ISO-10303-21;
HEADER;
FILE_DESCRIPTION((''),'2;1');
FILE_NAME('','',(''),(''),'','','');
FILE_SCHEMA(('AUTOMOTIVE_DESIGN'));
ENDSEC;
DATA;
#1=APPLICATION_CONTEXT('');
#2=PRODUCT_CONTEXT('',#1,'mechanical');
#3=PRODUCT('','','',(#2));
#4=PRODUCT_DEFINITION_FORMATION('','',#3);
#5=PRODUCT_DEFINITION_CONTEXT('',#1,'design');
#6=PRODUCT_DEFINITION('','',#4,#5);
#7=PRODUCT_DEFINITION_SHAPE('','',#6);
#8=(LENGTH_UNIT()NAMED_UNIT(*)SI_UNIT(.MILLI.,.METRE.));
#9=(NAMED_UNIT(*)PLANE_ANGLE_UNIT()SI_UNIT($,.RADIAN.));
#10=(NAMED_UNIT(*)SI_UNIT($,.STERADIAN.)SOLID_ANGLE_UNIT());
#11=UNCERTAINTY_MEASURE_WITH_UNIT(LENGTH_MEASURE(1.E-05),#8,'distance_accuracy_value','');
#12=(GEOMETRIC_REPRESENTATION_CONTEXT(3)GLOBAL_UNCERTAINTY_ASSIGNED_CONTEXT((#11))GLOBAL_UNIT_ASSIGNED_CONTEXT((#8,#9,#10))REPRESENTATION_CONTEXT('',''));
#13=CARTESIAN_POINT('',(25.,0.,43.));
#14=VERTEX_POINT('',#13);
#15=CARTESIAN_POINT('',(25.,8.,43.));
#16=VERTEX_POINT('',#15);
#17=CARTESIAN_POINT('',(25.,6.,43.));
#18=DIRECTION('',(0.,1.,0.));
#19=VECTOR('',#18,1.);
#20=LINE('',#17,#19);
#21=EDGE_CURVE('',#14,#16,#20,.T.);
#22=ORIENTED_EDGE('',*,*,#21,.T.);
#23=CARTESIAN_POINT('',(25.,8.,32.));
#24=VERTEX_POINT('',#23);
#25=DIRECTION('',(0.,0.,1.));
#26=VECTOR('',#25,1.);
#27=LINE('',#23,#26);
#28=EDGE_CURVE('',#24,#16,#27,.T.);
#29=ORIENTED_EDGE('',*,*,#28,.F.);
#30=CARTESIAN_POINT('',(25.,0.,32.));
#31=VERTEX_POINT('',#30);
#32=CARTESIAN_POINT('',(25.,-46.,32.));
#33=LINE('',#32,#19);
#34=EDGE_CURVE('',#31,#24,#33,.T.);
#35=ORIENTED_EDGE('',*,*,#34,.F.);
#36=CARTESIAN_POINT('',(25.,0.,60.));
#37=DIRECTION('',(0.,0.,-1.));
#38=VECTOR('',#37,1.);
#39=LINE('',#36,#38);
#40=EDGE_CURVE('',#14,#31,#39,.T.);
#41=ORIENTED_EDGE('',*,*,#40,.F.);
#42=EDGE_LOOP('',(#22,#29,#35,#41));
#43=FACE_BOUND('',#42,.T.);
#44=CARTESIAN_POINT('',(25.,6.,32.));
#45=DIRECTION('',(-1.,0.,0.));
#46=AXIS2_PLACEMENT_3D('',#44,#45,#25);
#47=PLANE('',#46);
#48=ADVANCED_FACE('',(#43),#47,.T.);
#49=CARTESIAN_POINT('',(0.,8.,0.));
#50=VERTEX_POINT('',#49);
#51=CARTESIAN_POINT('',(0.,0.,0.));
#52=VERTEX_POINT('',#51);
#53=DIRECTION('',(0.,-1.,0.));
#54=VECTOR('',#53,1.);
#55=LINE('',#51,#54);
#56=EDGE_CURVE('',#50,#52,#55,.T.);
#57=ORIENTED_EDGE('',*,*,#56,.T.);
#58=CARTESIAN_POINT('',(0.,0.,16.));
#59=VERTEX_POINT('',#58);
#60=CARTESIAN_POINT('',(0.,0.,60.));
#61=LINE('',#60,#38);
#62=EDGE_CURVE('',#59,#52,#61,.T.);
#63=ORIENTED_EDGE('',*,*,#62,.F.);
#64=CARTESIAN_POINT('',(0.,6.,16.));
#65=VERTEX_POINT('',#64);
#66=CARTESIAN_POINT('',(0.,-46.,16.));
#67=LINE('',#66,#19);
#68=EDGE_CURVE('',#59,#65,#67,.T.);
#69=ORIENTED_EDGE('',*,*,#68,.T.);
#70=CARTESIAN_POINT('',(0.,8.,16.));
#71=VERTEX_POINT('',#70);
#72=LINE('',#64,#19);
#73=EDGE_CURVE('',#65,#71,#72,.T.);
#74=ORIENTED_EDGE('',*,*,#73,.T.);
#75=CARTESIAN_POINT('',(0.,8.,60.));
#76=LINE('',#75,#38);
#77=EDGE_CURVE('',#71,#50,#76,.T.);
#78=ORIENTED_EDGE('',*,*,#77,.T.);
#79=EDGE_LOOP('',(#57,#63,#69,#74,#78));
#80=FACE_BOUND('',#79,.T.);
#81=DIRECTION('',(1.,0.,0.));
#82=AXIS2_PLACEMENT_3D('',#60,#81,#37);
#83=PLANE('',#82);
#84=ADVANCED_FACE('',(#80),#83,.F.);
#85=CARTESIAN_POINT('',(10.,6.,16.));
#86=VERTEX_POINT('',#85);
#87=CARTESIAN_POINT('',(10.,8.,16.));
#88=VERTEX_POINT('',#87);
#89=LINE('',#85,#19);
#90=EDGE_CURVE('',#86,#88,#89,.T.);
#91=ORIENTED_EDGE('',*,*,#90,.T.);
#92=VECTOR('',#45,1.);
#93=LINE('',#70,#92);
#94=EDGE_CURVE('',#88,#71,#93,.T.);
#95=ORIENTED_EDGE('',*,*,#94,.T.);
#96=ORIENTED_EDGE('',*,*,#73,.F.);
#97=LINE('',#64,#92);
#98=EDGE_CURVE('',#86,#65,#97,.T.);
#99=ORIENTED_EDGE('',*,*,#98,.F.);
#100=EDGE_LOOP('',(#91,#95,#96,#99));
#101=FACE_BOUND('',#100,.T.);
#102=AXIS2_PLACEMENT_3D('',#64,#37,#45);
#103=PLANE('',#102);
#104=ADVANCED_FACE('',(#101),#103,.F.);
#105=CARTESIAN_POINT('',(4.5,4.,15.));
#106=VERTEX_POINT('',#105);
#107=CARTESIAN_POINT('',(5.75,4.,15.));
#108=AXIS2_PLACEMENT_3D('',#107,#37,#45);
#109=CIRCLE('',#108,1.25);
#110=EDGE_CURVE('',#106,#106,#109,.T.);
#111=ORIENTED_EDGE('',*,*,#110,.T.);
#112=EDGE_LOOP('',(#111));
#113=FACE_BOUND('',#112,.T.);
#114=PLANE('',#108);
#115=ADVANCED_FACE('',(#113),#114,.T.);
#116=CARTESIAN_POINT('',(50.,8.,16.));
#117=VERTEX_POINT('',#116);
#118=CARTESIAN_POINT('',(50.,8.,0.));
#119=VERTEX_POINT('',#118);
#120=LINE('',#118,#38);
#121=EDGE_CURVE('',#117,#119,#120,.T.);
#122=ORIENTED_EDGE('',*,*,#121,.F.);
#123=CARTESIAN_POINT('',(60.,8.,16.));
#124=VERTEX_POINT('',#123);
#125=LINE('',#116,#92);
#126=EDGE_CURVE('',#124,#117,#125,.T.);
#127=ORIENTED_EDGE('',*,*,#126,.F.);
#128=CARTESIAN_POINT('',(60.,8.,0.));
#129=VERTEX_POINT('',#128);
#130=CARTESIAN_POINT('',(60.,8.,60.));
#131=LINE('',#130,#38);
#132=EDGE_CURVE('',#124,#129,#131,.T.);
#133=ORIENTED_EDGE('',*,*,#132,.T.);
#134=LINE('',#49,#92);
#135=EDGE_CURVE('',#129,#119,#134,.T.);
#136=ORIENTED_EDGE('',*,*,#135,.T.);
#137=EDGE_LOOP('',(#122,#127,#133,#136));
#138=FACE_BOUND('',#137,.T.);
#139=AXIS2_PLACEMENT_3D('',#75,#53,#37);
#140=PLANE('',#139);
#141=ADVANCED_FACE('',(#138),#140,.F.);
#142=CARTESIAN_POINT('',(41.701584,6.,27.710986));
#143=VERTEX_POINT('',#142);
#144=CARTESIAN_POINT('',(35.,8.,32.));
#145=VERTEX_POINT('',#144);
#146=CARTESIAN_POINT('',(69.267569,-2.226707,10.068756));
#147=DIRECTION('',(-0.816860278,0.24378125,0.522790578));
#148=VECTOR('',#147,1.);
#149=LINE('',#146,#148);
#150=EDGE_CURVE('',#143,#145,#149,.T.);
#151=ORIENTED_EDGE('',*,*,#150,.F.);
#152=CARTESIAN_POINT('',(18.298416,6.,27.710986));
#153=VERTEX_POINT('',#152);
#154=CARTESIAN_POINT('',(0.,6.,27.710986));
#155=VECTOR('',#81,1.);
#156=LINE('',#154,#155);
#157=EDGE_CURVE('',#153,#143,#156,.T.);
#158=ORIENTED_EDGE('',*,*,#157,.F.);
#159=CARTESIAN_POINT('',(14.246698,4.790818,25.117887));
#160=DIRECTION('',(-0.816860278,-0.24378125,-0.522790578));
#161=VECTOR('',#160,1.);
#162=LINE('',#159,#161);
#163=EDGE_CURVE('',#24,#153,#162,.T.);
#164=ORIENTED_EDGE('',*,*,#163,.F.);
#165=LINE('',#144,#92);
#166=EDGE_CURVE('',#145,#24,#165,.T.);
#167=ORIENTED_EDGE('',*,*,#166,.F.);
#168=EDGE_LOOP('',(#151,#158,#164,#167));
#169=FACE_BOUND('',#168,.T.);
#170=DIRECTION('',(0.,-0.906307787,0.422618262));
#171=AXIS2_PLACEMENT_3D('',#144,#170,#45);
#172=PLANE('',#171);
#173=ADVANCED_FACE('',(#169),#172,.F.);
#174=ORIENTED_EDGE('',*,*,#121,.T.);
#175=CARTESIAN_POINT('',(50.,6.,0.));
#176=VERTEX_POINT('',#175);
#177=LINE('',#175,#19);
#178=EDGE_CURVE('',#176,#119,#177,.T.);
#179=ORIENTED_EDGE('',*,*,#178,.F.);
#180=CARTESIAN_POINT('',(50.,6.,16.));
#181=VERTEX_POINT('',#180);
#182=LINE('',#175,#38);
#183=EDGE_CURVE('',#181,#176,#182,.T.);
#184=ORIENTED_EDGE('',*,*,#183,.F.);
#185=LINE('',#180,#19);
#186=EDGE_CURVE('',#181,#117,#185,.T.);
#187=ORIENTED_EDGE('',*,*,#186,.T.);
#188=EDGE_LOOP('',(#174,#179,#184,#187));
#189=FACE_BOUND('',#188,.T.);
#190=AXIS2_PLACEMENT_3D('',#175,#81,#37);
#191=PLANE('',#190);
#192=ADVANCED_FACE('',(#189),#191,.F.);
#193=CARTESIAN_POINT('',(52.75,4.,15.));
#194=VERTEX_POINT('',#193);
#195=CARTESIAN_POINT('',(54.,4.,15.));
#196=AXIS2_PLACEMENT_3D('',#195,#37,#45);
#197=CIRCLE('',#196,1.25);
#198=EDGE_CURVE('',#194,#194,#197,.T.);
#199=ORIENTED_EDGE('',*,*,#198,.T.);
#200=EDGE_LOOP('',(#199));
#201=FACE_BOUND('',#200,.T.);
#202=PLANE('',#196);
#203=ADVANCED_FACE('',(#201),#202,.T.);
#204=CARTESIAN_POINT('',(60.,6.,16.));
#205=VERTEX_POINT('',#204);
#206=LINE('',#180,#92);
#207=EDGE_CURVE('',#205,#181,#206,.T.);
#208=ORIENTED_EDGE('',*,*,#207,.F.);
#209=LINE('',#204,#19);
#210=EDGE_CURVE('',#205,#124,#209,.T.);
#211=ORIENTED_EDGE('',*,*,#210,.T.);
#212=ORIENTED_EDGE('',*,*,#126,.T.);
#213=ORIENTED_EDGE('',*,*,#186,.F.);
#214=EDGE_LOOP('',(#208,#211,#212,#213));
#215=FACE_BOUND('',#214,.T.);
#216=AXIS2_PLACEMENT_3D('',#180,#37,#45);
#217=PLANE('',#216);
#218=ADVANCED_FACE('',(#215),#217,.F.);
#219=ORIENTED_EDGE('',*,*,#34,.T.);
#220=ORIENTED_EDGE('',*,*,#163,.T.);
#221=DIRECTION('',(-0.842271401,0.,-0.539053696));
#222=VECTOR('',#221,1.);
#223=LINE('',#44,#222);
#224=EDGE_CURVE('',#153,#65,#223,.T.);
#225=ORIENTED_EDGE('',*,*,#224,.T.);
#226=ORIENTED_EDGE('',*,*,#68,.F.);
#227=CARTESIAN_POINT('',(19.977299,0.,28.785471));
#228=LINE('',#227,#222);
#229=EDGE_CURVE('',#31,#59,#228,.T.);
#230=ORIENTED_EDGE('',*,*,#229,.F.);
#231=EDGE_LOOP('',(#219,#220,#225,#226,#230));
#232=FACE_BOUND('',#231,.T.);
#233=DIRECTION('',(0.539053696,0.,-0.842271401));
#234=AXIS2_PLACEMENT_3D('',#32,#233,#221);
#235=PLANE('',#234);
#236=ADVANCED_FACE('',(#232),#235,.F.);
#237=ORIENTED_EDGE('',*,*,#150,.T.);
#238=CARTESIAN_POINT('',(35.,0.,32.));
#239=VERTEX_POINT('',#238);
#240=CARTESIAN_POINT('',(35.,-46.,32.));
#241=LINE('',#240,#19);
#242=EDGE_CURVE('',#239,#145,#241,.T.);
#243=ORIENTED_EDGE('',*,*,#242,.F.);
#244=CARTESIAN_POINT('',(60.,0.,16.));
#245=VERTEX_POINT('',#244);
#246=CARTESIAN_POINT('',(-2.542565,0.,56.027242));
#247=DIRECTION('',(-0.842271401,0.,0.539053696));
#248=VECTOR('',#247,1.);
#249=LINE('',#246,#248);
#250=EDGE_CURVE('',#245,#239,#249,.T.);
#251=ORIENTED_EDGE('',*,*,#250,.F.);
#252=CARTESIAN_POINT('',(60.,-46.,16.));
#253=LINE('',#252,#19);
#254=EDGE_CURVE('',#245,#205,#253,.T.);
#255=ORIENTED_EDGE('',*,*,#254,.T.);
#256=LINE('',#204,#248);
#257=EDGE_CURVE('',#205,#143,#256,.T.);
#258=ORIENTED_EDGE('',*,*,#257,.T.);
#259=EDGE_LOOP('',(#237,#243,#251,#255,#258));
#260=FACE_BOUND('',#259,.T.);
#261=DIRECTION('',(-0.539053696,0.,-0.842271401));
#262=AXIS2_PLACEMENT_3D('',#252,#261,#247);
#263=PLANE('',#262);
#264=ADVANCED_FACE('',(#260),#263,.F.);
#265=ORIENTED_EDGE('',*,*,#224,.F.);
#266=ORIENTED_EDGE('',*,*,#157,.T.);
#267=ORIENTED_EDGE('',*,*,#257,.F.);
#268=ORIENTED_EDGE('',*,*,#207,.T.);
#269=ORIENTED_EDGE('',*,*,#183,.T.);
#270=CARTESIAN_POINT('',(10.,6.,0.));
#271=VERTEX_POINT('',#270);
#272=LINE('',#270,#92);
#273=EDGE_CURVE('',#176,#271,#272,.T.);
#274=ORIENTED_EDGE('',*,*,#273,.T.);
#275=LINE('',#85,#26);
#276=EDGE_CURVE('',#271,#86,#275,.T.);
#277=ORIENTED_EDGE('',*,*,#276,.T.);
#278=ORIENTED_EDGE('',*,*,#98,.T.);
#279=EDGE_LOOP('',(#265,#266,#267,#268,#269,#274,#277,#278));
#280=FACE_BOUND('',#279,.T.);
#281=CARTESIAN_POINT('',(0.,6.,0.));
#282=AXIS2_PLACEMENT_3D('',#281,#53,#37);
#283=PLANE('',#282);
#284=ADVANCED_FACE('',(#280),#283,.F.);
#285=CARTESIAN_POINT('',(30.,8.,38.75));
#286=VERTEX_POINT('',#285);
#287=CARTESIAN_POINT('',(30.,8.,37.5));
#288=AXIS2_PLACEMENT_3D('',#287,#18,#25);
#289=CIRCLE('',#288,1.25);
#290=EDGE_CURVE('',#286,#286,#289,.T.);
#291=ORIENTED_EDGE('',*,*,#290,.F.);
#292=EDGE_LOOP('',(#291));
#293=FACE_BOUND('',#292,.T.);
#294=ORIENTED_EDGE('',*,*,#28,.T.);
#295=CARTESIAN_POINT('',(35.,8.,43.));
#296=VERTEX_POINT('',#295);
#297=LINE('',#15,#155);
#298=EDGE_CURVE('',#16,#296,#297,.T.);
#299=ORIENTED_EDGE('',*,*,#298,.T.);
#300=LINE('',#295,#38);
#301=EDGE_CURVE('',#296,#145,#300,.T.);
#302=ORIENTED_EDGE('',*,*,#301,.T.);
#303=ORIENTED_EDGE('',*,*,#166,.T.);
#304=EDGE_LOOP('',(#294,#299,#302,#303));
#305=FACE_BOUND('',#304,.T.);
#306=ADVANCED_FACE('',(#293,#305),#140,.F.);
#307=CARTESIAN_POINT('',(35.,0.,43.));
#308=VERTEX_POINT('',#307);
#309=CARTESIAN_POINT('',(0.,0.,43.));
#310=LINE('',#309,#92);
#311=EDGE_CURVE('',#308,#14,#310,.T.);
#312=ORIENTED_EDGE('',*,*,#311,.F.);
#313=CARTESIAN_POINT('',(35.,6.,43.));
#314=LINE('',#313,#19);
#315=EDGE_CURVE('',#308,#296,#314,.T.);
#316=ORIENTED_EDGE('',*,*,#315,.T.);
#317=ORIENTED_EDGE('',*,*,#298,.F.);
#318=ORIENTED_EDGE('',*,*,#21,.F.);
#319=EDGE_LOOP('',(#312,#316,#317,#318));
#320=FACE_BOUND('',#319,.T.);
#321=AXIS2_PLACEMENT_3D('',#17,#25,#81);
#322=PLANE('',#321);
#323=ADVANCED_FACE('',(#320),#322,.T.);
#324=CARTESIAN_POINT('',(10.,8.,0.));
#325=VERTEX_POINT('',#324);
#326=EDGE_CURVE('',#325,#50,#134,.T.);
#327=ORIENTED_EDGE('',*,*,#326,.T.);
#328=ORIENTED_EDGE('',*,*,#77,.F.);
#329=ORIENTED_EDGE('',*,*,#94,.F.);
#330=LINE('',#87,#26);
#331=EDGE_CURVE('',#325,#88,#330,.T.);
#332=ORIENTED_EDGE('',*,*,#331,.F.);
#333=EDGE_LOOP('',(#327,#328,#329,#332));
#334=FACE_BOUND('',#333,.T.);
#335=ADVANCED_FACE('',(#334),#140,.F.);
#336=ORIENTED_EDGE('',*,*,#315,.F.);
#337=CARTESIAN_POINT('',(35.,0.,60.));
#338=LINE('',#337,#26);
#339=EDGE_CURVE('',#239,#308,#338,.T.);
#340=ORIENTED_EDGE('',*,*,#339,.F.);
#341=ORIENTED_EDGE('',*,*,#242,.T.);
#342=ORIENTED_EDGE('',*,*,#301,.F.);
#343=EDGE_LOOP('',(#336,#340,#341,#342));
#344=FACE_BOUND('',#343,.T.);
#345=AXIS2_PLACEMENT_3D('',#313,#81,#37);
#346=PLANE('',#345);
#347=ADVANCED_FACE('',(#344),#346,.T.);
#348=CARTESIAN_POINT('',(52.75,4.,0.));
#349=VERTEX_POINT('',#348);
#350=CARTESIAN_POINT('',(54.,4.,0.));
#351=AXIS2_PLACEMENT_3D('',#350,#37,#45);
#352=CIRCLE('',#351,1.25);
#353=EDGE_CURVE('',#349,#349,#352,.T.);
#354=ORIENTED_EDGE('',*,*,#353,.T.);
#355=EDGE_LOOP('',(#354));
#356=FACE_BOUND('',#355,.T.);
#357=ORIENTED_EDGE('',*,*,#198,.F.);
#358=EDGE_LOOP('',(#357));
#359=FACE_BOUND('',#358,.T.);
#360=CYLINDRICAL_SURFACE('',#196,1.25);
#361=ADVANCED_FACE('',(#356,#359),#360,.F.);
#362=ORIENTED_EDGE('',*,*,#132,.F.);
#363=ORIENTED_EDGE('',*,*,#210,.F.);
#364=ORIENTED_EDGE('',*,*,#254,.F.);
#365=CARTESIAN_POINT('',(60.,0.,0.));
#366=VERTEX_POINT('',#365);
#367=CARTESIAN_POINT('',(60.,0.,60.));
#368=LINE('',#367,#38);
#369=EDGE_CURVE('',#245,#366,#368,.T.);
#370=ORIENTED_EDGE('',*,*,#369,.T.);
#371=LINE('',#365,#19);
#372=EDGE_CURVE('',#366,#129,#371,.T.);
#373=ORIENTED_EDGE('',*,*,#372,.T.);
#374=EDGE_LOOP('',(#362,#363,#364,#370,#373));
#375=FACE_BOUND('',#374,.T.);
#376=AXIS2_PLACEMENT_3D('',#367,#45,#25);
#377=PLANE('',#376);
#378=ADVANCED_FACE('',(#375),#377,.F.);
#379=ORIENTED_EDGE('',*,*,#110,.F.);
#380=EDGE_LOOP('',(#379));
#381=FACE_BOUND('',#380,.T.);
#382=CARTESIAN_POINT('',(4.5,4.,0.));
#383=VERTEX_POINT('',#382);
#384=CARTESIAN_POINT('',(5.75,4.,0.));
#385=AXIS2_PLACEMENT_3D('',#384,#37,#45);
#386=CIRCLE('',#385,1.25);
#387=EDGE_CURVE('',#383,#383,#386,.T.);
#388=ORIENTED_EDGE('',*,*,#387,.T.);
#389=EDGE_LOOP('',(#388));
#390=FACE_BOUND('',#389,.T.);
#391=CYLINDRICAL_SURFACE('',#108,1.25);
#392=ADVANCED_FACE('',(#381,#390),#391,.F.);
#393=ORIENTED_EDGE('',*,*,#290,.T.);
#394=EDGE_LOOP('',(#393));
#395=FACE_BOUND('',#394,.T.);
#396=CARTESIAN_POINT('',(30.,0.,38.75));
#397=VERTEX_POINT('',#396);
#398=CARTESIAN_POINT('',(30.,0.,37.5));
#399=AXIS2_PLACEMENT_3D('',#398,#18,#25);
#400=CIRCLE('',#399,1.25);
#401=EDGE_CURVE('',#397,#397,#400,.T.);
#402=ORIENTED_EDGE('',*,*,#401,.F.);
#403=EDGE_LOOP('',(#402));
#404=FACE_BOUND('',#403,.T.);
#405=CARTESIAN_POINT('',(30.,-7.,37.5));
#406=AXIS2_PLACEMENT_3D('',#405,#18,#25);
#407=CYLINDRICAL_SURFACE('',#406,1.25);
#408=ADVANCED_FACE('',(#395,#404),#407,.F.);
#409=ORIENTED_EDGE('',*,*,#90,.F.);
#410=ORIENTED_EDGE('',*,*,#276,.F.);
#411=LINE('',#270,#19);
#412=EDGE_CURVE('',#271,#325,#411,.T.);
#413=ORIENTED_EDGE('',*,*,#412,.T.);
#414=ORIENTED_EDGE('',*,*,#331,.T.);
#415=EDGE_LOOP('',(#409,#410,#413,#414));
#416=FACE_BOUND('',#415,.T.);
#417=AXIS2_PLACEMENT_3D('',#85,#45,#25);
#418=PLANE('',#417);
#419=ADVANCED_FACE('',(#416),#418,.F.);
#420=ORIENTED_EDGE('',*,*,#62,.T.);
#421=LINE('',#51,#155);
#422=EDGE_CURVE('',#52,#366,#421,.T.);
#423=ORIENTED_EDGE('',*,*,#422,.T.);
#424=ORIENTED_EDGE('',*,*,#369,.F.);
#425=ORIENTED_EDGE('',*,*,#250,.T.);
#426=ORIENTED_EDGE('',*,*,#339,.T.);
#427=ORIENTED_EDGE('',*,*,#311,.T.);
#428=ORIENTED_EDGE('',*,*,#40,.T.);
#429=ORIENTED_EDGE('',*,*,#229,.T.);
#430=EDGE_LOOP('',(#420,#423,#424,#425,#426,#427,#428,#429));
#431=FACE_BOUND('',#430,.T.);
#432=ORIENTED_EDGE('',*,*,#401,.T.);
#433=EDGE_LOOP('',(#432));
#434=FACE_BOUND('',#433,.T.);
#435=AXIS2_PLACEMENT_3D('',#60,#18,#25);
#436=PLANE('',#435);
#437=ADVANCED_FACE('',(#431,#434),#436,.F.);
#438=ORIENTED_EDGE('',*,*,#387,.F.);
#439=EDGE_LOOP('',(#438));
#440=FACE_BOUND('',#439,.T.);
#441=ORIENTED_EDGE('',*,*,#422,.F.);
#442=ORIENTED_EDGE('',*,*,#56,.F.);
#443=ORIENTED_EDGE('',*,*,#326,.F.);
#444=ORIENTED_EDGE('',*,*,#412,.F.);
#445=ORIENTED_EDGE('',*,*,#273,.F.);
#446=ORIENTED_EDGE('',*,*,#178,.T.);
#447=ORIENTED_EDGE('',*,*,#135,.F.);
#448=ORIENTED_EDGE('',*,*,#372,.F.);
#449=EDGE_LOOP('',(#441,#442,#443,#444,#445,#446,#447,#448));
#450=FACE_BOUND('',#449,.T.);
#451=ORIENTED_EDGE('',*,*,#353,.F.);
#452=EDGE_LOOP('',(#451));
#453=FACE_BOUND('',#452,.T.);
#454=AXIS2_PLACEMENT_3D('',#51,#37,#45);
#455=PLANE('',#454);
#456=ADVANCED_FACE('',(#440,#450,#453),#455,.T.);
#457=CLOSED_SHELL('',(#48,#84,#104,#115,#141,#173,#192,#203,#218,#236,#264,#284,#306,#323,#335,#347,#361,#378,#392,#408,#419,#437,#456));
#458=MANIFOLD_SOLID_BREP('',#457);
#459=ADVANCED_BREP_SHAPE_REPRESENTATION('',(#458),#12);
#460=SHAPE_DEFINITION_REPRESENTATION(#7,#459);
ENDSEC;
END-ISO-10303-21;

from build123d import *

# Parameters (mm, degrees)
ESQUISSE1_W             = 60
ESQUISSE1_H             = 8
BOSS_EXTRU_1_DEPTH      = 60
ESQUISSE2_R             = 1.25
ENL_V_MAT_EXTRU_1_DEPTH = 15
ESQUISSE3_R             = 1.25
ENL_V_MAT_EXTRU_2_DEPTH = 15
ESQUISSE4_W             = 10
ESQUISSE4_H             = 11
ENL_V_MAT_EXTRU_3_DEPTH = 2
ENL_V_MAT_EXTRU_4_DEPTH = 52
CHANFREIN1_SIZE2        = 4.289013841
CHANFREIN1_SIZE         = 2


with BuildPart() as part:
    # Esquisse1 → Boss.-Extru.1 (new body)
    with BuildSketch(Plane.XY):
        with Locations((30, 4)):
            Rectangle(ESQUISSE1_W, ESQUISSE1_H)
    extrude(amount=BOSS_EXTRU_1_DEPTH)

    # Esquisse2 → Enlèv. mat.-Extru.1 (cut)
    with BuildSketch(Plane(origin=(0, 0, 0), x_dir=(-1, 0, 0), z_dir=(0, 0, -1))):
        with Locations((-54, 4)):
            Circle(ESQUISSE2_R)
        with Locations((-5.75, 4)):
            Circle(ESQUISSE2_R)
    extrude(amount=-ENL_V_MAT_EXTRU_1_DEPTH, mode=Mode.SUBTRACT)

    # Esquisse3 → Enlèv. mat.-Extru.2 (cut)
    with BuildSketch(Plane(origin=(0, 8, 0), x_dir=(1, 0, 0), z_dir=(0, 1, 0))):
        with Locations(Location((30, -37.5, 0), (0, 0, 270))):
            Circle(ESQUISSE3_R)
    extrude(amount=-ENL_V_MAT_EXTRU_2_DEPTH, mode=Mode.SUBTRACT)

    # Esquisse4 → Enlèv. mat.-Extru.3 (cut)
    with BuildSketch(Plane(origin=(0, 8, 0), x_dir=(1, 0, 0), z_dir=(0, 1, 0))):
        Polygon((0, -16), (10, -16), (10, 0), (50, 0), (50, -16), (60, -16), (60, -60), (0, -60), align=None)
        with Locations((30, -37.5)):
            Rectangle(ESQUISSE4_W, ESQUISSE4_H, mode=Mode.SUBTRACT)
    extrude(amount=-ENL_V_MAT_EXTRU_3_DEPTH, mode=Mode.SUBTRACT)

    # Esquisse5 → Enlèv. mat.-Extru.4 (cut)
    with BuildSketch(Plane(origin=(0, 6, 0), x_dir=(1, 0, 0), z_dir=(0, 1, 0))):
        Polygon((60, -16), (35, -32), (35, -43), (25, -43), (25, -32), (0, -16), (-21.594855386, -85.475485762), (75.414479662, -69.930764824), align=None)
    extrude(amount=-ENL_V_MAT_EXTRU_4_DEPTH, mode=Mode.SUBTRACT)

    # Chanfrein1
    chanfrein1_edges = [part.edges().sort_by_distance(p)[0] for p in [
        (30, 6, 32),
    ]]
    chanfrein1_side = [part.faces().sort_by_distance(p)[0] for p in [
        (30, 6.04, 32),
    ]]
    chamfer(chanfrein1_edges, length=CHANFREIN1_SIZE - 0.0001, length2=CHANFREIN1_SIZE2 - 0.0001, reference=chanfrein1_side[0])  # a hair under: the kernel refuses the full size


solid = part.part
